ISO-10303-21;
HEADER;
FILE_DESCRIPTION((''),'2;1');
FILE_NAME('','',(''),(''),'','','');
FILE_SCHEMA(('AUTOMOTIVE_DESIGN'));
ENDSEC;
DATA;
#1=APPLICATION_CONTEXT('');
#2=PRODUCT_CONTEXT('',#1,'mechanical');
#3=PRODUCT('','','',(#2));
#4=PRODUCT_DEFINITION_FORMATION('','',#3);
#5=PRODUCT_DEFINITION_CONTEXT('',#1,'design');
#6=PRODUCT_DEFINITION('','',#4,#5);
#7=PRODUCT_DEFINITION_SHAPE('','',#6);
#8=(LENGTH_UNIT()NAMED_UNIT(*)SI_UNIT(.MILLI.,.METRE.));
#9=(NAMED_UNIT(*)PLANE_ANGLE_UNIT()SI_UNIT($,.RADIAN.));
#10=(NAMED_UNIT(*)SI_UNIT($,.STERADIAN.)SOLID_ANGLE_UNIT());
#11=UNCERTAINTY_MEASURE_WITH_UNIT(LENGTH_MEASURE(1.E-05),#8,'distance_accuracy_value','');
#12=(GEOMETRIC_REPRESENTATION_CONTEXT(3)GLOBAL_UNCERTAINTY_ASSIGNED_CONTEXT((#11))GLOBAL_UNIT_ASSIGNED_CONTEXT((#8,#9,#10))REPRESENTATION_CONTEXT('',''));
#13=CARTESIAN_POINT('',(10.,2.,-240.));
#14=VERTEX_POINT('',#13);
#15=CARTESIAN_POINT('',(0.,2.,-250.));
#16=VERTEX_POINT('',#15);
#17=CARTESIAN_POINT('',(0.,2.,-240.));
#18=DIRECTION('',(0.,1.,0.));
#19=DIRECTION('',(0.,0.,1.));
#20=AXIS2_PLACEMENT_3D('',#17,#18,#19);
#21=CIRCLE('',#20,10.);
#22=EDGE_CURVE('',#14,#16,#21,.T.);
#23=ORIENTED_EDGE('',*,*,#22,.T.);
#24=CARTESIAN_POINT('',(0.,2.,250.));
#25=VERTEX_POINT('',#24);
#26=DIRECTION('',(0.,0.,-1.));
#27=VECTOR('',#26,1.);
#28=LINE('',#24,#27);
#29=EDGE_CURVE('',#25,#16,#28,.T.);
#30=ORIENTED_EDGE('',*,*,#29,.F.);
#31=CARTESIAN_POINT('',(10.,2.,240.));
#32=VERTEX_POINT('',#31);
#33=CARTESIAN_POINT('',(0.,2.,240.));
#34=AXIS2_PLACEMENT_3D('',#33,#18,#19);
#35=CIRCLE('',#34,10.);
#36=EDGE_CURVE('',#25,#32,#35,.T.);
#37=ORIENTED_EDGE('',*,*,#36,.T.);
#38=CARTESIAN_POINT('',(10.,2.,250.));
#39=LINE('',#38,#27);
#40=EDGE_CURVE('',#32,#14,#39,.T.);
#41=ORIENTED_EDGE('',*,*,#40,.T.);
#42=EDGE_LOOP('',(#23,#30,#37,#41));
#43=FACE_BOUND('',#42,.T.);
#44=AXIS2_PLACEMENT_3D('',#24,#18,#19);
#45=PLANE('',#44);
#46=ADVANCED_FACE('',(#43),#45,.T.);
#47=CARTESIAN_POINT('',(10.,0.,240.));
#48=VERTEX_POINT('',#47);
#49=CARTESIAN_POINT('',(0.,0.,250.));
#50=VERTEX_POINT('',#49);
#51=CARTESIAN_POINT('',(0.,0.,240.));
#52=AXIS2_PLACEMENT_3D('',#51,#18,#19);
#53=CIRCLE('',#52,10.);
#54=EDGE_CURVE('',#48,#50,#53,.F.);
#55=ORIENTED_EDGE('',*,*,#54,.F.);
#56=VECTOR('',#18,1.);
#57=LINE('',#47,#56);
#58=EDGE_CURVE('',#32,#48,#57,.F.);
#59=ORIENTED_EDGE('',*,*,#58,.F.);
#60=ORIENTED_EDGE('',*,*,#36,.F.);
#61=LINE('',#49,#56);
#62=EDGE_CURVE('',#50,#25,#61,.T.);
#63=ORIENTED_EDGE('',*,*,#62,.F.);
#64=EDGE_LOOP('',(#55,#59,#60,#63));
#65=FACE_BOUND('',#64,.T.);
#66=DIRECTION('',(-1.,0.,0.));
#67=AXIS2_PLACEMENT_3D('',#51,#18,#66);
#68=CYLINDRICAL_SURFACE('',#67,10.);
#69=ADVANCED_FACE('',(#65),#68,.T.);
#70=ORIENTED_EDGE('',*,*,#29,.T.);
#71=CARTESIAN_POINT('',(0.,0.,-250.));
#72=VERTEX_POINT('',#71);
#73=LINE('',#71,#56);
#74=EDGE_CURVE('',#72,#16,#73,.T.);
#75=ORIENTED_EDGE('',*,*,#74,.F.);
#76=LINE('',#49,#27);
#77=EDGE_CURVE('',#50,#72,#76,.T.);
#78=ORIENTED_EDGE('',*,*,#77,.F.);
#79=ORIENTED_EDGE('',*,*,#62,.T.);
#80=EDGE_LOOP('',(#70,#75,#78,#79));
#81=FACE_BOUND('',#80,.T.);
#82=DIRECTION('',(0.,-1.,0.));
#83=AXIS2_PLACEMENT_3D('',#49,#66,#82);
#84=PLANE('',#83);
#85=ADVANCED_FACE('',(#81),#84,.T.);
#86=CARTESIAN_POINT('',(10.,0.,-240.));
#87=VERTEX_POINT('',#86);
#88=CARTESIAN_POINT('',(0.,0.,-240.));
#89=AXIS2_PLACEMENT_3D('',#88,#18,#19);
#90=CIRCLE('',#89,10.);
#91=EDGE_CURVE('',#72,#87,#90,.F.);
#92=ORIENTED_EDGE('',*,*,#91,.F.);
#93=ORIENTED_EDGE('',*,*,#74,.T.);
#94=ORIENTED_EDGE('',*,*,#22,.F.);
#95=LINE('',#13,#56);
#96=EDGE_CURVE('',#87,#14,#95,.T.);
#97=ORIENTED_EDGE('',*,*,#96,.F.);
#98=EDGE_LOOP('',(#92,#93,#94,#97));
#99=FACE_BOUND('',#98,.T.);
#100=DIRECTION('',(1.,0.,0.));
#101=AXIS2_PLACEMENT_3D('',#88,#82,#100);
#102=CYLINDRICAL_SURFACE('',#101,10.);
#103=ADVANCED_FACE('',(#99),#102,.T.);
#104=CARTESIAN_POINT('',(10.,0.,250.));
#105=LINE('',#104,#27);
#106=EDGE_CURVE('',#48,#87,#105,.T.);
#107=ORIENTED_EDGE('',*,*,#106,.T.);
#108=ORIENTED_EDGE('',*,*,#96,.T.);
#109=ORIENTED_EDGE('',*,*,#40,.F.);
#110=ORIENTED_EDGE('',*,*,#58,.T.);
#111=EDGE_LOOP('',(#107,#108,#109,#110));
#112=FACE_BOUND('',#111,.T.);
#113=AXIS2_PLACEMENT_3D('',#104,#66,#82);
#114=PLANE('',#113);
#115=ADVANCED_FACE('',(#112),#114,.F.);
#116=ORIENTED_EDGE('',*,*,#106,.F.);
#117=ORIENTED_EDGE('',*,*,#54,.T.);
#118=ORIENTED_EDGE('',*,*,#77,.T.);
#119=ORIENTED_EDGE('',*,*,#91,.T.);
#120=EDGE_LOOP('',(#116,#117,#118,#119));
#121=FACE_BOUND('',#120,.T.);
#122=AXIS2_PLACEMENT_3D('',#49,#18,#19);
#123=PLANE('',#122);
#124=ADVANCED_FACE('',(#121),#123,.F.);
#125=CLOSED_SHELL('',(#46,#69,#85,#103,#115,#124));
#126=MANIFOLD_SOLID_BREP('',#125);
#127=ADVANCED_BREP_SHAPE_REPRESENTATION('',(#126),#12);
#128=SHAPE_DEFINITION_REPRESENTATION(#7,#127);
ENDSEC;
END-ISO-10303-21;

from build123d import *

# Parameters (mm, degrees)
SKETCH_1_W      = 10
SKETCH_1_H      = 2
EXTRUDE_1_DEPTH = 250
FILLET_1_R      = 10


with BuildPart() as part:
    # 草图1 → 凸台-拉伸1 (new, symmetric)
    with BuildSketch(Plane.XY):
        with Locations((5, 1)):
            Rectangle(SKETCH_1_W, SKETCH_1_H)
    extrude(amount=EXTRUDE_1_DEPTH, both=True)

    # 圆角1
    fillet_1_edges = [part.edges().sort_by_distance(p)[0] for p in [
        (10, 1, -250),
        (10, 1, 250),
    ]]
    fillet(fillet_1_edges, radius=FILLET_1_R - 0.0001)  # a hair under: the kernel refuses the full size


solid = part.part
